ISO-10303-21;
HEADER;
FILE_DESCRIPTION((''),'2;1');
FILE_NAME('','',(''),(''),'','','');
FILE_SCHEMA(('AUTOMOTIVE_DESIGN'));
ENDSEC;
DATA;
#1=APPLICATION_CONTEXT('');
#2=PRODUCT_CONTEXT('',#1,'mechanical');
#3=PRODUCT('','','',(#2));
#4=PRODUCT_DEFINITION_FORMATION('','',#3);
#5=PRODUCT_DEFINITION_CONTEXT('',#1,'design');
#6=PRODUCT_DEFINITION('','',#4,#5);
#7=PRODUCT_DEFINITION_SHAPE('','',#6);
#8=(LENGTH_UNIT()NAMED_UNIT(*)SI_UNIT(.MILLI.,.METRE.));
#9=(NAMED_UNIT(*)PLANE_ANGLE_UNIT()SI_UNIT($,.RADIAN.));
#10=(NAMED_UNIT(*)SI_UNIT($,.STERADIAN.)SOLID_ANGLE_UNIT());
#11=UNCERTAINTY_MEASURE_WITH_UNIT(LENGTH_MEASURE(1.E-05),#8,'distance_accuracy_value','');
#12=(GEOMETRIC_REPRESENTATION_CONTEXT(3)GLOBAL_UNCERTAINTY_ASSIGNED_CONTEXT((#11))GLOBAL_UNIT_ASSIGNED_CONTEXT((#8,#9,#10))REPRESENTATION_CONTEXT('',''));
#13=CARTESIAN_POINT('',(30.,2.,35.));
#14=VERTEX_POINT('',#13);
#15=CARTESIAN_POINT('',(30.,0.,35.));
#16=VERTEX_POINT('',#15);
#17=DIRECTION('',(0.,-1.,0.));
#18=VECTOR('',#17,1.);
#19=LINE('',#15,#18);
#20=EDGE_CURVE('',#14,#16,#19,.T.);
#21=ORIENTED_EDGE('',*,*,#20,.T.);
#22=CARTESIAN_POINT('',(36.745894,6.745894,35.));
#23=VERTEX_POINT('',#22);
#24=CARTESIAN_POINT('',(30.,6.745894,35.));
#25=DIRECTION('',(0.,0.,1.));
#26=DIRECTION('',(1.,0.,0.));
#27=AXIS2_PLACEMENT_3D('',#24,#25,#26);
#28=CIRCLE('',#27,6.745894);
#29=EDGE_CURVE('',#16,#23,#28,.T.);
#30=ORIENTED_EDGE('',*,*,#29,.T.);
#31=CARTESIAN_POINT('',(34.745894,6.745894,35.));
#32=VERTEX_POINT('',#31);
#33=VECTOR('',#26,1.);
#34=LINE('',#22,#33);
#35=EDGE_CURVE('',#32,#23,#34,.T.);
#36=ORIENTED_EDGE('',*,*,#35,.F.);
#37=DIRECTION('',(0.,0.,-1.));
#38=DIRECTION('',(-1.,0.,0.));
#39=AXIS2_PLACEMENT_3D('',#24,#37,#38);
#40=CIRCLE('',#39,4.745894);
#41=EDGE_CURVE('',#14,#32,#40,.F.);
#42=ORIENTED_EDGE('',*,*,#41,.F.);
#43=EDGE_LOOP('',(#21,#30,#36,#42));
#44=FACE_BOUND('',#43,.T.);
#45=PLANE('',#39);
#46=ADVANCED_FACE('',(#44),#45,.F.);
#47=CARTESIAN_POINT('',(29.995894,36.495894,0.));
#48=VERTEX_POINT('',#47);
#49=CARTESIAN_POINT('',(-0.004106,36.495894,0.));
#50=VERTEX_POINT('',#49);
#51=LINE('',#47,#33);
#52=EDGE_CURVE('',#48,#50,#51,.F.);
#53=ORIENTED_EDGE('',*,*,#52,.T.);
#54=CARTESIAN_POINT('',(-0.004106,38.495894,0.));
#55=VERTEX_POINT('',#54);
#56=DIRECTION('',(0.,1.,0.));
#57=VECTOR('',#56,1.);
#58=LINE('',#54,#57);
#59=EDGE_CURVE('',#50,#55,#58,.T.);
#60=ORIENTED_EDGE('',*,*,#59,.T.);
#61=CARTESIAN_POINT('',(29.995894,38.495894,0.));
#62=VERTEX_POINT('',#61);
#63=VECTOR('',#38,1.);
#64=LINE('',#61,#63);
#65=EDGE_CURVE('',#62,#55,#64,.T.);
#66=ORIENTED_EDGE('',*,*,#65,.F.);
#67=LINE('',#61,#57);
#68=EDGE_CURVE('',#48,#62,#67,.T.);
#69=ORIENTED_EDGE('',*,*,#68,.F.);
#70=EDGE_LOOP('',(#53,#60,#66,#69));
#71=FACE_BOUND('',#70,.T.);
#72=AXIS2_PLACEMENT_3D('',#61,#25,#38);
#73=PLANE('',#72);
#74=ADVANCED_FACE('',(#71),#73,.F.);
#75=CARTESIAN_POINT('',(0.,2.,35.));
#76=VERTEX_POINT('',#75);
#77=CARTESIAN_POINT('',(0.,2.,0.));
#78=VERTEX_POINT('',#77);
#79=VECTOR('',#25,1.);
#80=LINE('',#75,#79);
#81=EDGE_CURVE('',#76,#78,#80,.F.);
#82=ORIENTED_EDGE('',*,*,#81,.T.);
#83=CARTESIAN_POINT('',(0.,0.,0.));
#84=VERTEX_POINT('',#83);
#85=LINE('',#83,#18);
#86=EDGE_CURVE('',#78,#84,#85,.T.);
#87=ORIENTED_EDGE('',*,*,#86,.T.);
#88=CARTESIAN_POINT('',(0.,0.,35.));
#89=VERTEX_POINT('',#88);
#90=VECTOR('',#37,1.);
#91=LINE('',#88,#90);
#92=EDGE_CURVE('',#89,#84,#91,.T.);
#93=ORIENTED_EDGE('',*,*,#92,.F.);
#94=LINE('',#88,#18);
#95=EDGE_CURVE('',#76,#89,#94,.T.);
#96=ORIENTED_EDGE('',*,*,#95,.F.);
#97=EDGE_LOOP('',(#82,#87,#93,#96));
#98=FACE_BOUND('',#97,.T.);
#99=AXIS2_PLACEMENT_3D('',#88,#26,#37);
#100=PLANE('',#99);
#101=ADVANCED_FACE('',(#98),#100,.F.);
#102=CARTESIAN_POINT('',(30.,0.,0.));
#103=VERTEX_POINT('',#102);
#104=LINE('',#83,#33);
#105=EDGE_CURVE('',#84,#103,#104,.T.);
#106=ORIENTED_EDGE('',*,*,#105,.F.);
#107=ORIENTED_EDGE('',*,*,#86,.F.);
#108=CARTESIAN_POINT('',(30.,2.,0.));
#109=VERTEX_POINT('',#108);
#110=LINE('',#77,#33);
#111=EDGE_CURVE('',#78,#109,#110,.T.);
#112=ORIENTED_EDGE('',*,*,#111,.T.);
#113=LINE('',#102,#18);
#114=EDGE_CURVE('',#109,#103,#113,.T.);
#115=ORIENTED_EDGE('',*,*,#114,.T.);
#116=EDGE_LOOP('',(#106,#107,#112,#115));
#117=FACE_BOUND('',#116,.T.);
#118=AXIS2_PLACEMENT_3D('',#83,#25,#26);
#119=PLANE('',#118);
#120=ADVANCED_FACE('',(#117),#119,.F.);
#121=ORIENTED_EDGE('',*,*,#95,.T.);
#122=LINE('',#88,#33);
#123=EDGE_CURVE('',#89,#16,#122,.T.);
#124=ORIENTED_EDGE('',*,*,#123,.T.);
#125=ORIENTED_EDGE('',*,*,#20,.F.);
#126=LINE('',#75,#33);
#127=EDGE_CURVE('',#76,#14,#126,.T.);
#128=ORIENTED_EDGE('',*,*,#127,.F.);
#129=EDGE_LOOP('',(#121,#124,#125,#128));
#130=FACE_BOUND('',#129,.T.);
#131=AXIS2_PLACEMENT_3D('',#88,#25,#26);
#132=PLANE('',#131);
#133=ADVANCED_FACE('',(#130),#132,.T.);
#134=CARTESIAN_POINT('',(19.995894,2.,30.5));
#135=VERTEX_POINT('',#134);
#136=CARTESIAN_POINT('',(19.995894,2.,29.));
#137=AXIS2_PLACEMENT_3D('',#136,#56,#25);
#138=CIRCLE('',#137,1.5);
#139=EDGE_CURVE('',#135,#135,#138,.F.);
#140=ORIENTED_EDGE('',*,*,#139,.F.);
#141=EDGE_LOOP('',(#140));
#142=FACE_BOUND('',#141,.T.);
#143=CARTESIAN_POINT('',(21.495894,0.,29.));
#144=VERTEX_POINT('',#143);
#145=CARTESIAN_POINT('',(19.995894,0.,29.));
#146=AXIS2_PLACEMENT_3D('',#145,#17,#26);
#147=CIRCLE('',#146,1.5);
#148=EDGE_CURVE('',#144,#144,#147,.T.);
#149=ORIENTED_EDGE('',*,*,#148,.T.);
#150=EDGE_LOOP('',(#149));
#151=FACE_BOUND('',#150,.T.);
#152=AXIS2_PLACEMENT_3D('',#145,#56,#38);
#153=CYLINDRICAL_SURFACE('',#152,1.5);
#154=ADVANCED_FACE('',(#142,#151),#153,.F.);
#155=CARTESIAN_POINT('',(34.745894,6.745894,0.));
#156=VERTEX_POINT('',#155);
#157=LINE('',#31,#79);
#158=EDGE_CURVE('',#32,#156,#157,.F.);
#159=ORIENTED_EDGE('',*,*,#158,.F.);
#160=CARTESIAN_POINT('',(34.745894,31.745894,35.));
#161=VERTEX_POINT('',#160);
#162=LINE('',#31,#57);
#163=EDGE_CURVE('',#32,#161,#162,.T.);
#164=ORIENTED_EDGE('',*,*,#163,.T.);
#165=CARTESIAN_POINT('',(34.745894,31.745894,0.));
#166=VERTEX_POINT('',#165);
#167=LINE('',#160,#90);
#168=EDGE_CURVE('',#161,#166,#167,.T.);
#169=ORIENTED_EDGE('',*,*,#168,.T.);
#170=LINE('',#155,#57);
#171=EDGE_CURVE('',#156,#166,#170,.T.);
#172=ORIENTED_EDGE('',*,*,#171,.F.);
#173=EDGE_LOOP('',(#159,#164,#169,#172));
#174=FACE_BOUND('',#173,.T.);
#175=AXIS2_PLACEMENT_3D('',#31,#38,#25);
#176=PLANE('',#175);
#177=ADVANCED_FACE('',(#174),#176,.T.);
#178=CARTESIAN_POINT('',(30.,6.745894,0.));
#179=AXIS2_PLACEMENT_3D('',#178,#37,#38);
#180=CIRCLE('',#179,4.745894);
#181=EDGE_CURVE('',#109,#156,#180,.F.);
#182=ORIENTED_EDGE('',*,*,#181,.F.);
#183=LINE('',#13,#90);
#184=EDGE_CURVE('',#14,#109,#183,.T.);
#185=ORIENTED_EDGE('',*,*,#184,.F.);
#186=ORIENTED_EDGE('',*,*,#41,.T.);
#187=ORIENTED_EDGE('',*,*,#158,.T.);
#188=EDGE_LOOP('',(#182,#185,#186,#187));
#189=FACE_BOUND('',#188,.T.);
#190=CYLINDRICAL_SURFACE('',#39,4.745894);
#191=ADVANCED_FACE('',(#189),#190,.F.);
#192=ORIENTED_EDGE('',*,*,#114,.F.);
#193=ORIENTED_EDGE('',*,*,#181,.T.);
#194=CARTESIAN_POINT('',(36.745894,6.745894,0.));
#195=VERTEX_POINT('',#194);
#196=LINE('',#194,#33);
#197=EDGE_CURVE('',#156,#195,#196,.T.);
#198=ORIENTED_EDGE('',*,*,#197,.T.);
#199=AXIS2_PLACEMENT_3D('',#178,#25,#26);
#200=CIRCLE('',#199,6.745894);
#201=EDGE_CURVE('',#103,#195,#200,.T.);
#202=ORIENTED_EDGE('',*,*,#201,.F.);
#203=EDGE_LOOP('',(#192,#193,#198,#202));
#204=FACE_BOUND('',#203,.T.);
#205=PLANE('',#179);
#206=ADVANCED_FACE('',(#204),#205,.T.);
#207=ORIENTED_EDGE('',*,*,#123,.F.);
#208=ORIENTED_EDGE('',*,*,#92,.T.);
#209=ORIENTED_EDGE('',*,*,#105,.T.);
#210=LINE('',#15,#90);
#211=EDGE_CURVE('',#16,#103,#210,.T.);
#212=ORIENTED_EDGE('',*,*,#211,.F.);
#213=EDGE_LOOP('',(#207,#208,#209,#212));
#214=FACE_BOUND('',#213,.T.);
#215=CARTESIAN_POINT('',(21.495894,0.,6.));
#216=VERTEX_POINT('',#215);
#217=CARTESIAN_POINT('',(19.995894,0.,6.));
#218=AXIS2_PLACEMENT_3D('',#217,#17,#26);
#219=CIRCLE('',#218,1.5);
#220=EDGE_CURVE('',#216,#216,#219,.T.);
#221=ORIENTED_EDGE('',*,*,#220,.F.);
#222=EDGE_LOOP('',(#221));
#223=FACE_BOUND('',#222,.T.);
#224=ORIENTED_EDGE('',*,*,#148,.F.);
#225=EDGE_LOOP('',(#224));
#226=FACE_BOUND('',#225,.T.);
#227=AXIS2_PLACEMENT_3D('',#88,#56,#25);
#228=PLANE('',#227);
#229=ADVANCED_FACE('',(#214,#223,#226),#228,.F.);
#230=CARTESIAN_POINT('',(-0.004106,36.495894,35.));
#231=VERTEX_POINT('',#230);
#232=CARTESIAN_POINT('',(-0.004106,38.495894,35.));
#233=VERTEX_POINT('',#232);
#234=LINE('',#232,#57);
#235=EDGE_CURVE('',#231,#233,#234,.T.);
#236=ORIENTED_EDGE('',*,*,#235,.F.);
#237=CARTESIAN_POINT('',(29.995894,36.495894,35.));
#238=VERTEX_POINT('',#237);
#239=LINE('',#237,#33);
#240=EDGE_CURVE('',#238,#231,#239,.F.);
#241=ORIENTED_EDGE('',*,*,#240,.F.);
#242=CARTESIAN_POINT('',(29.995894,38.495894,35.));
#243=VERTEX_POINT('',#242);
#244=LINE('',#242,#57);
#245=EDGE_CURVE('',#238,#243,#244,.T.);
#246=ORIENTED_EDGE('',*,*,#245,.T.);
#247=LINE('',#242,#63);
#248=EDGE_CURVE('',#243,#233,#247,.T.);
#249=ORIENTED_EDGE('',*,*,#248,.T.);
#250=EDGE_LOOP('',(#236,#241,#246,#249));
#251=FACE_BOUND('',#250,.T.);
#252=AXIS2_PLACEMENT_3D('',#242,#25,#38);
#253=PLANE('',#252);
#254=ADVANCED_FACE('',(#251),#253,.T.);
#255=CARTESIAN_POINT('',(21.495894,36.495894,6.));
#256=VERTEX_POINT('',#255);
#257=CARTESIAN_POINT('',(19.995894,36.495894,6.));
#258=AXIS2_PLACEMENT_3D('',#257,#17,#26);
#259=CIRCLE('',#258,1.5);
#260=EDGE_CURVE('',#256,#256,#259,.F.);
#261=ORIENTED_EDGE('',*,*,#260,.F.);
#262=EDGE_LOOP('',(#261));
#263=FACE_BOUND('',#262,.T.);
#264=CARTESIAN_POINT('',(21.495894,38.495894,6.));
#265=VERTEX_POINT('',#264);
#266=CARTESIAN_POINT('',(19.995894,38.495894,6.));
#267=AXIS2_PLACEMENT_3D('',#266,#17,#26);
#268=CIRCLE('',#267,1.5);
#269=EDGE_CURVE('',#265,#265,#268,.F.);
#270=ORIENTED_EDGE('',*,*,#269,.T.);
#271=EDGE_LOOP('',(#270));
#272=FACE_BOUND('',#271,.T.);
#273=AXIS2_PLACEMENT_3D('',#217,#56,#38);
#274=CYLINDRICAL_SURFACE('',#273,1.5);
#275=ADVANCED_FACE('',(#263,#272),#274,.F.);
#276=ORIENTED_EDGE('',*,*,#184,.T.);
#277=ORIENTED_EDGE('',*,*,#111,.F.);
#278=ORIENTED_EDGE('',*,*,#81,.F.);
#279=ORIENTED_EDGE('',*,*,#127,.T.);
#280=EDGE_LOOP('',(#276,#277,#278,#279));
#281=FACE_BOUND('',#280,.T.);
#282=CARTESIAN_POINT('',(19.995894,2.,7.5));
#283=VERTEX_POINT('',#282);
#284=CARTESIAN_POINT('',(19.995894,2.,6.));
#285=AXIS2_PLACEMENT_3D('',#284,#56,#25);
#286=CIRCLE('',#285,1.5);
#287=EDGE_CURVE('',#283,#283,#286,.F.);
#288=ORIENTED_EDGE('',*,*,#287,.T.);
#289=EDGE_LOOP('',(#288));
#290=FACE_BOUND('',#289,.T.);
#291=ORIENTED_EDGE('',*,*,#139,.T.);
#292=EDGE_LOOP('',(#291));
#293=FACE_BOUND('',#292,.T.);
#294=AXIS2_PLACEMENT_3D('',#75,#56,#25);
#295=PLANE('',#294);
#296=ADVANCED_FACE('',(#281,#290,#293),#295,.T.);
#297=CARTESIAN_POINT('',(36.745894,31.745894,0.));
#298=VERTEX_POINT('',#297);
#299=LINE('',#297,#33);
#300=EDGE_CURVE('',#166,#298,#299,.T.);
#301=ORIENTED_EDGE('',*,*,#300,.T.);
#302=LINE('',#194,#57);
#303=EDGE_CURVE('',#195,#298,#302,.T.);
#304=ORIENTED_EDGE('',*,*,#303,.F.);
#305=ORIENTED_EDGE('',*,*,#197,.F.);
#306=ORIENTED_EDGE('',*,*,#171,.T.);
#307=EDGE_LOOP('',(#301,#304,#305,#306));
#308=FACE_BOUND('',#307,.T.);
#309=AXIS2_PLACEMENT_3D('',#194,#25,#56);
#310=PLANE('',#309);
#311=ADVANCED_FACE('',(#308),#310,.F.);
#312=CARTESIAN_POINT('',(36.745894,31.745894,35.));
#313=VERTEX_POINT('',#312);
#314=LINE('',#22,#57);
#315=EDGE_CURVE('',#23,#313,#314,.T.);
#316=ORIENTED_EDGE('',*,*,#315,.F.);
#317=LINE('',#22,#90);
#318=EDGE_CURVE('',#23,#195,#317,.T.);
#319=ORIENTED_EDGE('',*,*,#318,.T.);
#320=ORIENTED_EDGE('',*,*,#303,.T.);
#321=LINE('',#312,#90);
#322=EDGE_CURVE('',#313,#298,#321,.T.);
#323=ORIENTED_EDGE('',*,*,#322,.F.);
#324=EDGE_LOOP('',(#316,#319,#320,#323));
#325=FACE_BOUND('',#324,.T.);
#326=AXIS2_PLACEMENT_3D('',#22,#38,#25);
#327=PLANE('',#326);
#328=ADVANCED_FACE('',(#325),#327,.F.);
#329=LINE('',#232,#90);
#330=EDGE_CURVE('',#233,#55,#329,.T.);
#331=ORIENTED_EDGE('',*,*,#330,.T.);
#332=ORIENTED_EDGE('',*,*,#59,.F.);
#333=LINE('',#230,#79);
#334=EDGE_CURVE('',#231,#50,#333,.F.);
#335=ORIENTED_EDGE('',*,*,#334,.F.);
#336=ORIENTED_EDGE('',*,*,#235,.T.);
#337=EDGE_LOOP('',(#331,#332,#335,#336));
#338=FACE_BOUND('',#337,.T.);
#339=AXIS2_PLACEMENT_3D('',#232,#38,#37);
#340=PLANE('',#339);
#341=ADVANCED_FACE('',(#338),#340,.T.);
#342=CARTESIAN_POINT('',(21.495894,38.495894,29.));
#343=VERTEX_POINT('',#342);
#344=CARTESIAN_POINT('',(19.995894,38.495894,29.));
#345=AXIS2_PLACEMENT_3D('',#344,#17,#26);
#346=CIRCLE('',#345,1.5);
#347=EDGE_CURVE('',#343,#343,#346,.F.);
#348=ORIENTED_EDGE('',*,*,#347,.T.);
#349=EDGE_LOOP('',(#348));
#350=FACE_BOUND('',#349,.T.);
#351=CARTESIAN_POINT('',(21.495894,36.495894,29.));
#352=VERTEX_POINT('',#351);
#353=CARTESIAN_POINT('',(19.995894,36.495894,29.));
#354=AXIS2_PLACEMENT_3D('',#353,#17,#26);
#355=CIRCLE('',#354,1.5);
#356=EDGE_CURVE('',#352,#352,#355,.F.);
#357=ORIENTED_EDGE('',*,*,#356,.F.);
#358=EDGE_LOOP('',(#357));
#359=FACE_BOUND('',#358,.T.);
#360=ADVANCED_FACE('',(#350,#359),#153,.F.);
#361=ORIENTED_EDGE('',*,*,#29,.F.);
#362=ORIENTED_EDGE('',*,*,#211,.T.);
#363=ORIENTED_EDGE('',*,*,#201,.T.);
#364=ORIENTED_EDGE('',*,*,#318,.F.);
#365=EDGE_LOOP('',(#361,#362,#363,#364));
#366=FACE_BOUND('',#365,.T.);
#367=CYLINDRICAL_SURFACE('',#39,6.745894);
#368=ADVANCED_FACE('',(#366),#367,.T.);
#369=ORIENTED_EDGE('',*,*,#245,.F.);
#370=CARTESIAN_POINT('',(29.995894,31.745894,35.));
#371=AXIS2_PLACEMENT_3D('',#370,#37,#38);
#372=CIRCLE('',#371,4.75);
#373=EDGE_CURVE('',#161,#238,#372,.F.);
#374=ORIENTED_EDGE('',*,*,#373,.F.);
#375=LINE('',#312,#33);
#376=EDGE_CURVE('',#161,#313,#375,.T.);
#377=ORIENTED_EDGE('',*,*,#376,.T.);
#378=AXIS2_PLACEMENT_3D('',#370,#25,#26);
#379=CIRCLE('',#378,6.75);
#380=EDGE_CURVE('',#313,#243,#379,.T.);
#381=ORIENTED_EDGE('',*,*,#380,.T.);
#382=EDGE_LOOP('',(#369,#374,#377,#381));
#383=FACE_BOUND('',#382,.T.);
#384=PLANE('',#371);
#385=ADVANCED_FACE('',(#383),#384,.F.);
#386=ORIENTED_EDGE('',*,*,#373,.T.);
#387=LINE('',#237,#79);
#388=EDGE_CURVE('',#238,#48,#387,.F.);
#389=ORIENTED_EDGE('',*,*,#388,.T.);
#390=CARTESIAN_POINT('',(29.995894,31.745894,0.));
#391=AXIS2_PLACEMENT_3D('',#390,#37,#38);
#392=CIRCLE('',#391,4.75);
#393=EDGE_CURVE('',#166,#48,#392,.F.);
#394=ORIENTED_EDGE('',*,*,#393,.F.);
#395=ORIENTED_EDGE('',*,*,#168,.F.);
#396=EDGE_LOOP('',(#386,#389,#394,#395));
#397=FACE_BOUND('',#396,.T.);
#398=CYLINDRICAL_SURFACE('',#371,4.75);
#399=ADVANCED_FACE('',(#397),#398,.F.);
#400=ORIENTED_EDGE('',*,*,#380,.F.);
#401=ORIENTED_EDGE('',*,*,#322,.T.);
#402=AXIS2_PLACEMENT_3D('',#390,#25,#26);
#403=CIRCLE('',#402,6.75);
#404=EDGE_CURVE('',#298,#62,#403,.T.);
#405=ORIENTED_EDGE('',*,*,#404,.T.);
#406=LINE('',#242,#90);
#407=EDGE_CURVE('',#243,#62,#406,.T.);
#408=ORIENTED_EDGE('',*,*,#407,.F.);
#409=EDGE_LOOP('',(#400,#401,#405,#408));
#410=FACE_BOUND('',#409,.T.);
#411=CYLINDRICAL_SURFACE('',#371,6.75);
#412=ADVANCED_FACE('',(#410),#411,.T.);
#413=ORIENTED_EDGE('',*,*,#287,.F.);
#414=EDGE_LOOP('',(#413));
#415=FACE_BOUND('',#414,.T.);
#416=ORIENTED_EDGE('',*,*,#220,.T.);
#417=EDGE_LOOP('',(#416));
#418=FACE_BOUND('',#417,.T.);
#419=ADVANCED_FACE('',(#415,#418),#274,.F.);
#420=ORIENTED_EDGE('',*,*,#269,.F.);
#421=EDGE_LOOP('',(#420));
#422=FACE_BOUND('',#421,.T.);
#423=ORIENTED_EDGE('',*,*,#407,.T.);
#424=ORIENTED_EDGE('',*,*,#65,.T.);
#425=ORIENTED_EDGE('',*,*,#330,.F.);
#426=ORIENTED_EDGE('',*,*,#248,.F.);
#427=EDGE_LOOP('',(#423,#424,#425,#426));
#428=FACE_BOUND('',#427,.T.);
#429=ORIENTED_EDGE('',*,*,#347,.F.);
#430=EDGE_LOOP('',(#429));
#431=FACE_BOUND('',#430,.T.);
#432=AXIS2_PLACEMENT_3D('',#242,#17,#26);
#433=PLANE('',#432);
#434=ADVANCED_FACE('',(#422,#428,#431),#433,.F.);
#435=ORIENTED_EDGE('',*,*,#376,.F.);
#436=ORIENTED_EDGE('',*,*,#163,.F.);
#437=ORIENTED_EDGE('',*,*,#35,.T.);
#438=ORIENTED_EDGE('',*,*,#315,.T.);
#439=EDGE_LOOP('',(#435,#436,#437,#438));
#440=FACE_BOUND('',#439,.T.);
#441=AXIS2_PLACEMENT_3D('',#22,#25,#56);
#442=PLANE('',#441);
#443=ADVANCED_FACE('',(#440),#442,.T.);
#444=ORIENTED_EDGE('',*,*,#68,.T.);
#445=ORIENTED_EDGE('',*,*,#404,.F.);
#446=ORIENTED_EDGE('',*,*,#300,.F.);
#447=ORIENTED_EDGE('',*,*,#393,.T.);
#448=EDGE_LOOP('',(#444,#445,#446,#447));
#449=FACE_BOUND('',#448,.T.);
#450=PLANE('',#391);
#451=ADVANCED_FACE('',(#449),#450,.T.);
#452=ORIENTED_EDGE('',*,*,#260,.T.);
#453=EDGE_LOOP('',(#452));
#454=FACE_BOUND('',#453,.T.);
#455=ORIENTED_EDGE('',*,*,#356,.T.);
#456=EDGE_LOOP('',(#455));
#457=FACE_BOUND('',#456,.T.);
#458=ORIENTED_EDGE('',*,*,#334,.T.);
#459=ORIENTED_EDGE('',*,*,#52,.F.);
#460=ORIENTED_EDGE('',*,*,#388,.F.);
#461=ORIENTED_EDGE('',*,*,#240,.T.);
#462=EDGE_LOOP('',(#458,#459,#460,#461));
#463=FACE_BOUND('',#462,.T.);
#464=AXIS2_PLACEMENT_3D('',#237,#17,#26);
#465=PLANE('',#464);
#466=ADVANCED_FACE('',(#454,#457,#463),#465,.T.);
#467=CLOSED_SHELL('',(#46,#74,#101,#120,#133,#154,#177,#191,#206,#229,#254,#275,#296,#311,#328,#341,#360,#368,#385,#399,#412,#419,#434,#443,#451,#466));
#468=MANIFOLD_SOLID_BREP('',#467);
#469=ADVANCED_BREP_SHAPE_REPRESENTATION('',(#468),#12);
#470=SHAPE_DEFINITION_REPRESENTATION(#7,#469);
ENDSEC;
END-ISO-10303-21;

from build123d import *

# Parameters (mm, degrees)
BOSS_EXTRUDE1_DEPTH     = 35
CONVERT_SOLID1_DEPTH    = 35
CUT_EXTRUDE1_DEPTH      = 68.63261331
CUT_EXTRUDE1_DEPTH_BACK = 7.5
SKETCH2_R               = 1.5


# Read off the part's stored shape, not the designer's step: Convert-Solid1
with BuildPart() as part:
    # Sketch1 → Boss-Extrude1 (new body)
    with BuildSketch(Plane.XY):
        with BuildLine():
            Line((0, 0), (30, 0))
            ThreePointArc((30, 0), (34.770067359, 1.975826594), (36.745893953, 6.745893953))
            Line((36.745893953, 6.745893953), (36.745893953, 31.745893953))
            ThreePointArc((36.745893953, 31.745893953), (34.768864726, 36.518864726), (29.995893953, 38.495893953))
            Line((29.995893953, 38.495893953), (-0.004106047, 38.495893953))
            Line((-0.004106047, 38.495893953), (-0.004106047, 36.995893953))
            Line((-0.004106047, 36.995893953), (29.995893953, 36.995893953))
            ThreePointArc((29.995893953, 36.995893953), (33.708204554, 35.458204554), (35.245893953, 31.745893953))
            Line((35.245893953, 31.745893953), (35.245893953, 6.75))
            ThreePointArc((35.245893953, 6.75), (33.708204554, 3.037689399), (29.995893953, 1.5))
            Line((29.995893953, 1.5), (0, 1.5))
            Line((0, 1.5), (0, 0))
        make_face()
    extrude(amount=BOSS_EXTRUDE1_DEPTH)

    # Convert-Solid1 outline → Convert-Solid1 (add)
    with BuildSketch(Plane.XY):
        with BuildLine():
            Line((29.995893953, 36.995893953), (-0.004106047, 36.995893953))
            Line((-0.004106047, 36.995893953), (-0.004106047, 36.495893953))
            Line((-0.004106047, 36.495893953), (29.995893953, 36.495893953))
            ThreePointArc((29.995893953, 36.495893953), (33.354651163, 35.104651163), (34.745893953, 31.745893953))
            Line((34.745893953, 31.745893953), (34.745893953, 6.745893953))
            ThreePointArc((34.745893953, 6.745893953), (33.355853797, 3.390040156), (30, 2))
            Line((30, 2), (0, 2))
            Line((0, 2), (0, 1.5))
            Line((0, 1.5), (29.995893953, 1.5))
            ThreePointArc((29.995893953, 1.5), (33.708204554, 3.037689399), (35.245893953, 6.75))
            Line((35.245893953, 6.75), (35.245893953, 31.745893953))
            ThreePointArc((35.245893953, 31.745893953), (33.708204554, 35.458204554), (29.995893953, 36.995893953))
        make_face()
    extrude(amount=CONVERT_SOLID1_DEPTH)

    # Sketch2 → Cut-Extrude1 (cut, two sides: drawn at the far end of the back side and taken through both)
    with BuildSketch(Plane(origin=(54.180486852, 36.495893953, 17.5), x_dir=(0, 0, 1), z_dir=(0, -1, 0)).offset(-CUT_EXTRUDE1_DEPTH_BACK)):
        with Locations(Location((11.5, 34.184592899, 0), (0, 0, 270))):
            Circle(SKETCH2_R)
        with Locations(Location((-11.5, 34.184592899, 0), (0, 0, 270))):
            Circle(SKETCH2_R)
    extrude(amount=CUT_EXTRUDE1_DEPTH + CUT_EXTRUDE1_DEPTH_BACK, mode=Mode.SUBTRACT)


solid = part.part
